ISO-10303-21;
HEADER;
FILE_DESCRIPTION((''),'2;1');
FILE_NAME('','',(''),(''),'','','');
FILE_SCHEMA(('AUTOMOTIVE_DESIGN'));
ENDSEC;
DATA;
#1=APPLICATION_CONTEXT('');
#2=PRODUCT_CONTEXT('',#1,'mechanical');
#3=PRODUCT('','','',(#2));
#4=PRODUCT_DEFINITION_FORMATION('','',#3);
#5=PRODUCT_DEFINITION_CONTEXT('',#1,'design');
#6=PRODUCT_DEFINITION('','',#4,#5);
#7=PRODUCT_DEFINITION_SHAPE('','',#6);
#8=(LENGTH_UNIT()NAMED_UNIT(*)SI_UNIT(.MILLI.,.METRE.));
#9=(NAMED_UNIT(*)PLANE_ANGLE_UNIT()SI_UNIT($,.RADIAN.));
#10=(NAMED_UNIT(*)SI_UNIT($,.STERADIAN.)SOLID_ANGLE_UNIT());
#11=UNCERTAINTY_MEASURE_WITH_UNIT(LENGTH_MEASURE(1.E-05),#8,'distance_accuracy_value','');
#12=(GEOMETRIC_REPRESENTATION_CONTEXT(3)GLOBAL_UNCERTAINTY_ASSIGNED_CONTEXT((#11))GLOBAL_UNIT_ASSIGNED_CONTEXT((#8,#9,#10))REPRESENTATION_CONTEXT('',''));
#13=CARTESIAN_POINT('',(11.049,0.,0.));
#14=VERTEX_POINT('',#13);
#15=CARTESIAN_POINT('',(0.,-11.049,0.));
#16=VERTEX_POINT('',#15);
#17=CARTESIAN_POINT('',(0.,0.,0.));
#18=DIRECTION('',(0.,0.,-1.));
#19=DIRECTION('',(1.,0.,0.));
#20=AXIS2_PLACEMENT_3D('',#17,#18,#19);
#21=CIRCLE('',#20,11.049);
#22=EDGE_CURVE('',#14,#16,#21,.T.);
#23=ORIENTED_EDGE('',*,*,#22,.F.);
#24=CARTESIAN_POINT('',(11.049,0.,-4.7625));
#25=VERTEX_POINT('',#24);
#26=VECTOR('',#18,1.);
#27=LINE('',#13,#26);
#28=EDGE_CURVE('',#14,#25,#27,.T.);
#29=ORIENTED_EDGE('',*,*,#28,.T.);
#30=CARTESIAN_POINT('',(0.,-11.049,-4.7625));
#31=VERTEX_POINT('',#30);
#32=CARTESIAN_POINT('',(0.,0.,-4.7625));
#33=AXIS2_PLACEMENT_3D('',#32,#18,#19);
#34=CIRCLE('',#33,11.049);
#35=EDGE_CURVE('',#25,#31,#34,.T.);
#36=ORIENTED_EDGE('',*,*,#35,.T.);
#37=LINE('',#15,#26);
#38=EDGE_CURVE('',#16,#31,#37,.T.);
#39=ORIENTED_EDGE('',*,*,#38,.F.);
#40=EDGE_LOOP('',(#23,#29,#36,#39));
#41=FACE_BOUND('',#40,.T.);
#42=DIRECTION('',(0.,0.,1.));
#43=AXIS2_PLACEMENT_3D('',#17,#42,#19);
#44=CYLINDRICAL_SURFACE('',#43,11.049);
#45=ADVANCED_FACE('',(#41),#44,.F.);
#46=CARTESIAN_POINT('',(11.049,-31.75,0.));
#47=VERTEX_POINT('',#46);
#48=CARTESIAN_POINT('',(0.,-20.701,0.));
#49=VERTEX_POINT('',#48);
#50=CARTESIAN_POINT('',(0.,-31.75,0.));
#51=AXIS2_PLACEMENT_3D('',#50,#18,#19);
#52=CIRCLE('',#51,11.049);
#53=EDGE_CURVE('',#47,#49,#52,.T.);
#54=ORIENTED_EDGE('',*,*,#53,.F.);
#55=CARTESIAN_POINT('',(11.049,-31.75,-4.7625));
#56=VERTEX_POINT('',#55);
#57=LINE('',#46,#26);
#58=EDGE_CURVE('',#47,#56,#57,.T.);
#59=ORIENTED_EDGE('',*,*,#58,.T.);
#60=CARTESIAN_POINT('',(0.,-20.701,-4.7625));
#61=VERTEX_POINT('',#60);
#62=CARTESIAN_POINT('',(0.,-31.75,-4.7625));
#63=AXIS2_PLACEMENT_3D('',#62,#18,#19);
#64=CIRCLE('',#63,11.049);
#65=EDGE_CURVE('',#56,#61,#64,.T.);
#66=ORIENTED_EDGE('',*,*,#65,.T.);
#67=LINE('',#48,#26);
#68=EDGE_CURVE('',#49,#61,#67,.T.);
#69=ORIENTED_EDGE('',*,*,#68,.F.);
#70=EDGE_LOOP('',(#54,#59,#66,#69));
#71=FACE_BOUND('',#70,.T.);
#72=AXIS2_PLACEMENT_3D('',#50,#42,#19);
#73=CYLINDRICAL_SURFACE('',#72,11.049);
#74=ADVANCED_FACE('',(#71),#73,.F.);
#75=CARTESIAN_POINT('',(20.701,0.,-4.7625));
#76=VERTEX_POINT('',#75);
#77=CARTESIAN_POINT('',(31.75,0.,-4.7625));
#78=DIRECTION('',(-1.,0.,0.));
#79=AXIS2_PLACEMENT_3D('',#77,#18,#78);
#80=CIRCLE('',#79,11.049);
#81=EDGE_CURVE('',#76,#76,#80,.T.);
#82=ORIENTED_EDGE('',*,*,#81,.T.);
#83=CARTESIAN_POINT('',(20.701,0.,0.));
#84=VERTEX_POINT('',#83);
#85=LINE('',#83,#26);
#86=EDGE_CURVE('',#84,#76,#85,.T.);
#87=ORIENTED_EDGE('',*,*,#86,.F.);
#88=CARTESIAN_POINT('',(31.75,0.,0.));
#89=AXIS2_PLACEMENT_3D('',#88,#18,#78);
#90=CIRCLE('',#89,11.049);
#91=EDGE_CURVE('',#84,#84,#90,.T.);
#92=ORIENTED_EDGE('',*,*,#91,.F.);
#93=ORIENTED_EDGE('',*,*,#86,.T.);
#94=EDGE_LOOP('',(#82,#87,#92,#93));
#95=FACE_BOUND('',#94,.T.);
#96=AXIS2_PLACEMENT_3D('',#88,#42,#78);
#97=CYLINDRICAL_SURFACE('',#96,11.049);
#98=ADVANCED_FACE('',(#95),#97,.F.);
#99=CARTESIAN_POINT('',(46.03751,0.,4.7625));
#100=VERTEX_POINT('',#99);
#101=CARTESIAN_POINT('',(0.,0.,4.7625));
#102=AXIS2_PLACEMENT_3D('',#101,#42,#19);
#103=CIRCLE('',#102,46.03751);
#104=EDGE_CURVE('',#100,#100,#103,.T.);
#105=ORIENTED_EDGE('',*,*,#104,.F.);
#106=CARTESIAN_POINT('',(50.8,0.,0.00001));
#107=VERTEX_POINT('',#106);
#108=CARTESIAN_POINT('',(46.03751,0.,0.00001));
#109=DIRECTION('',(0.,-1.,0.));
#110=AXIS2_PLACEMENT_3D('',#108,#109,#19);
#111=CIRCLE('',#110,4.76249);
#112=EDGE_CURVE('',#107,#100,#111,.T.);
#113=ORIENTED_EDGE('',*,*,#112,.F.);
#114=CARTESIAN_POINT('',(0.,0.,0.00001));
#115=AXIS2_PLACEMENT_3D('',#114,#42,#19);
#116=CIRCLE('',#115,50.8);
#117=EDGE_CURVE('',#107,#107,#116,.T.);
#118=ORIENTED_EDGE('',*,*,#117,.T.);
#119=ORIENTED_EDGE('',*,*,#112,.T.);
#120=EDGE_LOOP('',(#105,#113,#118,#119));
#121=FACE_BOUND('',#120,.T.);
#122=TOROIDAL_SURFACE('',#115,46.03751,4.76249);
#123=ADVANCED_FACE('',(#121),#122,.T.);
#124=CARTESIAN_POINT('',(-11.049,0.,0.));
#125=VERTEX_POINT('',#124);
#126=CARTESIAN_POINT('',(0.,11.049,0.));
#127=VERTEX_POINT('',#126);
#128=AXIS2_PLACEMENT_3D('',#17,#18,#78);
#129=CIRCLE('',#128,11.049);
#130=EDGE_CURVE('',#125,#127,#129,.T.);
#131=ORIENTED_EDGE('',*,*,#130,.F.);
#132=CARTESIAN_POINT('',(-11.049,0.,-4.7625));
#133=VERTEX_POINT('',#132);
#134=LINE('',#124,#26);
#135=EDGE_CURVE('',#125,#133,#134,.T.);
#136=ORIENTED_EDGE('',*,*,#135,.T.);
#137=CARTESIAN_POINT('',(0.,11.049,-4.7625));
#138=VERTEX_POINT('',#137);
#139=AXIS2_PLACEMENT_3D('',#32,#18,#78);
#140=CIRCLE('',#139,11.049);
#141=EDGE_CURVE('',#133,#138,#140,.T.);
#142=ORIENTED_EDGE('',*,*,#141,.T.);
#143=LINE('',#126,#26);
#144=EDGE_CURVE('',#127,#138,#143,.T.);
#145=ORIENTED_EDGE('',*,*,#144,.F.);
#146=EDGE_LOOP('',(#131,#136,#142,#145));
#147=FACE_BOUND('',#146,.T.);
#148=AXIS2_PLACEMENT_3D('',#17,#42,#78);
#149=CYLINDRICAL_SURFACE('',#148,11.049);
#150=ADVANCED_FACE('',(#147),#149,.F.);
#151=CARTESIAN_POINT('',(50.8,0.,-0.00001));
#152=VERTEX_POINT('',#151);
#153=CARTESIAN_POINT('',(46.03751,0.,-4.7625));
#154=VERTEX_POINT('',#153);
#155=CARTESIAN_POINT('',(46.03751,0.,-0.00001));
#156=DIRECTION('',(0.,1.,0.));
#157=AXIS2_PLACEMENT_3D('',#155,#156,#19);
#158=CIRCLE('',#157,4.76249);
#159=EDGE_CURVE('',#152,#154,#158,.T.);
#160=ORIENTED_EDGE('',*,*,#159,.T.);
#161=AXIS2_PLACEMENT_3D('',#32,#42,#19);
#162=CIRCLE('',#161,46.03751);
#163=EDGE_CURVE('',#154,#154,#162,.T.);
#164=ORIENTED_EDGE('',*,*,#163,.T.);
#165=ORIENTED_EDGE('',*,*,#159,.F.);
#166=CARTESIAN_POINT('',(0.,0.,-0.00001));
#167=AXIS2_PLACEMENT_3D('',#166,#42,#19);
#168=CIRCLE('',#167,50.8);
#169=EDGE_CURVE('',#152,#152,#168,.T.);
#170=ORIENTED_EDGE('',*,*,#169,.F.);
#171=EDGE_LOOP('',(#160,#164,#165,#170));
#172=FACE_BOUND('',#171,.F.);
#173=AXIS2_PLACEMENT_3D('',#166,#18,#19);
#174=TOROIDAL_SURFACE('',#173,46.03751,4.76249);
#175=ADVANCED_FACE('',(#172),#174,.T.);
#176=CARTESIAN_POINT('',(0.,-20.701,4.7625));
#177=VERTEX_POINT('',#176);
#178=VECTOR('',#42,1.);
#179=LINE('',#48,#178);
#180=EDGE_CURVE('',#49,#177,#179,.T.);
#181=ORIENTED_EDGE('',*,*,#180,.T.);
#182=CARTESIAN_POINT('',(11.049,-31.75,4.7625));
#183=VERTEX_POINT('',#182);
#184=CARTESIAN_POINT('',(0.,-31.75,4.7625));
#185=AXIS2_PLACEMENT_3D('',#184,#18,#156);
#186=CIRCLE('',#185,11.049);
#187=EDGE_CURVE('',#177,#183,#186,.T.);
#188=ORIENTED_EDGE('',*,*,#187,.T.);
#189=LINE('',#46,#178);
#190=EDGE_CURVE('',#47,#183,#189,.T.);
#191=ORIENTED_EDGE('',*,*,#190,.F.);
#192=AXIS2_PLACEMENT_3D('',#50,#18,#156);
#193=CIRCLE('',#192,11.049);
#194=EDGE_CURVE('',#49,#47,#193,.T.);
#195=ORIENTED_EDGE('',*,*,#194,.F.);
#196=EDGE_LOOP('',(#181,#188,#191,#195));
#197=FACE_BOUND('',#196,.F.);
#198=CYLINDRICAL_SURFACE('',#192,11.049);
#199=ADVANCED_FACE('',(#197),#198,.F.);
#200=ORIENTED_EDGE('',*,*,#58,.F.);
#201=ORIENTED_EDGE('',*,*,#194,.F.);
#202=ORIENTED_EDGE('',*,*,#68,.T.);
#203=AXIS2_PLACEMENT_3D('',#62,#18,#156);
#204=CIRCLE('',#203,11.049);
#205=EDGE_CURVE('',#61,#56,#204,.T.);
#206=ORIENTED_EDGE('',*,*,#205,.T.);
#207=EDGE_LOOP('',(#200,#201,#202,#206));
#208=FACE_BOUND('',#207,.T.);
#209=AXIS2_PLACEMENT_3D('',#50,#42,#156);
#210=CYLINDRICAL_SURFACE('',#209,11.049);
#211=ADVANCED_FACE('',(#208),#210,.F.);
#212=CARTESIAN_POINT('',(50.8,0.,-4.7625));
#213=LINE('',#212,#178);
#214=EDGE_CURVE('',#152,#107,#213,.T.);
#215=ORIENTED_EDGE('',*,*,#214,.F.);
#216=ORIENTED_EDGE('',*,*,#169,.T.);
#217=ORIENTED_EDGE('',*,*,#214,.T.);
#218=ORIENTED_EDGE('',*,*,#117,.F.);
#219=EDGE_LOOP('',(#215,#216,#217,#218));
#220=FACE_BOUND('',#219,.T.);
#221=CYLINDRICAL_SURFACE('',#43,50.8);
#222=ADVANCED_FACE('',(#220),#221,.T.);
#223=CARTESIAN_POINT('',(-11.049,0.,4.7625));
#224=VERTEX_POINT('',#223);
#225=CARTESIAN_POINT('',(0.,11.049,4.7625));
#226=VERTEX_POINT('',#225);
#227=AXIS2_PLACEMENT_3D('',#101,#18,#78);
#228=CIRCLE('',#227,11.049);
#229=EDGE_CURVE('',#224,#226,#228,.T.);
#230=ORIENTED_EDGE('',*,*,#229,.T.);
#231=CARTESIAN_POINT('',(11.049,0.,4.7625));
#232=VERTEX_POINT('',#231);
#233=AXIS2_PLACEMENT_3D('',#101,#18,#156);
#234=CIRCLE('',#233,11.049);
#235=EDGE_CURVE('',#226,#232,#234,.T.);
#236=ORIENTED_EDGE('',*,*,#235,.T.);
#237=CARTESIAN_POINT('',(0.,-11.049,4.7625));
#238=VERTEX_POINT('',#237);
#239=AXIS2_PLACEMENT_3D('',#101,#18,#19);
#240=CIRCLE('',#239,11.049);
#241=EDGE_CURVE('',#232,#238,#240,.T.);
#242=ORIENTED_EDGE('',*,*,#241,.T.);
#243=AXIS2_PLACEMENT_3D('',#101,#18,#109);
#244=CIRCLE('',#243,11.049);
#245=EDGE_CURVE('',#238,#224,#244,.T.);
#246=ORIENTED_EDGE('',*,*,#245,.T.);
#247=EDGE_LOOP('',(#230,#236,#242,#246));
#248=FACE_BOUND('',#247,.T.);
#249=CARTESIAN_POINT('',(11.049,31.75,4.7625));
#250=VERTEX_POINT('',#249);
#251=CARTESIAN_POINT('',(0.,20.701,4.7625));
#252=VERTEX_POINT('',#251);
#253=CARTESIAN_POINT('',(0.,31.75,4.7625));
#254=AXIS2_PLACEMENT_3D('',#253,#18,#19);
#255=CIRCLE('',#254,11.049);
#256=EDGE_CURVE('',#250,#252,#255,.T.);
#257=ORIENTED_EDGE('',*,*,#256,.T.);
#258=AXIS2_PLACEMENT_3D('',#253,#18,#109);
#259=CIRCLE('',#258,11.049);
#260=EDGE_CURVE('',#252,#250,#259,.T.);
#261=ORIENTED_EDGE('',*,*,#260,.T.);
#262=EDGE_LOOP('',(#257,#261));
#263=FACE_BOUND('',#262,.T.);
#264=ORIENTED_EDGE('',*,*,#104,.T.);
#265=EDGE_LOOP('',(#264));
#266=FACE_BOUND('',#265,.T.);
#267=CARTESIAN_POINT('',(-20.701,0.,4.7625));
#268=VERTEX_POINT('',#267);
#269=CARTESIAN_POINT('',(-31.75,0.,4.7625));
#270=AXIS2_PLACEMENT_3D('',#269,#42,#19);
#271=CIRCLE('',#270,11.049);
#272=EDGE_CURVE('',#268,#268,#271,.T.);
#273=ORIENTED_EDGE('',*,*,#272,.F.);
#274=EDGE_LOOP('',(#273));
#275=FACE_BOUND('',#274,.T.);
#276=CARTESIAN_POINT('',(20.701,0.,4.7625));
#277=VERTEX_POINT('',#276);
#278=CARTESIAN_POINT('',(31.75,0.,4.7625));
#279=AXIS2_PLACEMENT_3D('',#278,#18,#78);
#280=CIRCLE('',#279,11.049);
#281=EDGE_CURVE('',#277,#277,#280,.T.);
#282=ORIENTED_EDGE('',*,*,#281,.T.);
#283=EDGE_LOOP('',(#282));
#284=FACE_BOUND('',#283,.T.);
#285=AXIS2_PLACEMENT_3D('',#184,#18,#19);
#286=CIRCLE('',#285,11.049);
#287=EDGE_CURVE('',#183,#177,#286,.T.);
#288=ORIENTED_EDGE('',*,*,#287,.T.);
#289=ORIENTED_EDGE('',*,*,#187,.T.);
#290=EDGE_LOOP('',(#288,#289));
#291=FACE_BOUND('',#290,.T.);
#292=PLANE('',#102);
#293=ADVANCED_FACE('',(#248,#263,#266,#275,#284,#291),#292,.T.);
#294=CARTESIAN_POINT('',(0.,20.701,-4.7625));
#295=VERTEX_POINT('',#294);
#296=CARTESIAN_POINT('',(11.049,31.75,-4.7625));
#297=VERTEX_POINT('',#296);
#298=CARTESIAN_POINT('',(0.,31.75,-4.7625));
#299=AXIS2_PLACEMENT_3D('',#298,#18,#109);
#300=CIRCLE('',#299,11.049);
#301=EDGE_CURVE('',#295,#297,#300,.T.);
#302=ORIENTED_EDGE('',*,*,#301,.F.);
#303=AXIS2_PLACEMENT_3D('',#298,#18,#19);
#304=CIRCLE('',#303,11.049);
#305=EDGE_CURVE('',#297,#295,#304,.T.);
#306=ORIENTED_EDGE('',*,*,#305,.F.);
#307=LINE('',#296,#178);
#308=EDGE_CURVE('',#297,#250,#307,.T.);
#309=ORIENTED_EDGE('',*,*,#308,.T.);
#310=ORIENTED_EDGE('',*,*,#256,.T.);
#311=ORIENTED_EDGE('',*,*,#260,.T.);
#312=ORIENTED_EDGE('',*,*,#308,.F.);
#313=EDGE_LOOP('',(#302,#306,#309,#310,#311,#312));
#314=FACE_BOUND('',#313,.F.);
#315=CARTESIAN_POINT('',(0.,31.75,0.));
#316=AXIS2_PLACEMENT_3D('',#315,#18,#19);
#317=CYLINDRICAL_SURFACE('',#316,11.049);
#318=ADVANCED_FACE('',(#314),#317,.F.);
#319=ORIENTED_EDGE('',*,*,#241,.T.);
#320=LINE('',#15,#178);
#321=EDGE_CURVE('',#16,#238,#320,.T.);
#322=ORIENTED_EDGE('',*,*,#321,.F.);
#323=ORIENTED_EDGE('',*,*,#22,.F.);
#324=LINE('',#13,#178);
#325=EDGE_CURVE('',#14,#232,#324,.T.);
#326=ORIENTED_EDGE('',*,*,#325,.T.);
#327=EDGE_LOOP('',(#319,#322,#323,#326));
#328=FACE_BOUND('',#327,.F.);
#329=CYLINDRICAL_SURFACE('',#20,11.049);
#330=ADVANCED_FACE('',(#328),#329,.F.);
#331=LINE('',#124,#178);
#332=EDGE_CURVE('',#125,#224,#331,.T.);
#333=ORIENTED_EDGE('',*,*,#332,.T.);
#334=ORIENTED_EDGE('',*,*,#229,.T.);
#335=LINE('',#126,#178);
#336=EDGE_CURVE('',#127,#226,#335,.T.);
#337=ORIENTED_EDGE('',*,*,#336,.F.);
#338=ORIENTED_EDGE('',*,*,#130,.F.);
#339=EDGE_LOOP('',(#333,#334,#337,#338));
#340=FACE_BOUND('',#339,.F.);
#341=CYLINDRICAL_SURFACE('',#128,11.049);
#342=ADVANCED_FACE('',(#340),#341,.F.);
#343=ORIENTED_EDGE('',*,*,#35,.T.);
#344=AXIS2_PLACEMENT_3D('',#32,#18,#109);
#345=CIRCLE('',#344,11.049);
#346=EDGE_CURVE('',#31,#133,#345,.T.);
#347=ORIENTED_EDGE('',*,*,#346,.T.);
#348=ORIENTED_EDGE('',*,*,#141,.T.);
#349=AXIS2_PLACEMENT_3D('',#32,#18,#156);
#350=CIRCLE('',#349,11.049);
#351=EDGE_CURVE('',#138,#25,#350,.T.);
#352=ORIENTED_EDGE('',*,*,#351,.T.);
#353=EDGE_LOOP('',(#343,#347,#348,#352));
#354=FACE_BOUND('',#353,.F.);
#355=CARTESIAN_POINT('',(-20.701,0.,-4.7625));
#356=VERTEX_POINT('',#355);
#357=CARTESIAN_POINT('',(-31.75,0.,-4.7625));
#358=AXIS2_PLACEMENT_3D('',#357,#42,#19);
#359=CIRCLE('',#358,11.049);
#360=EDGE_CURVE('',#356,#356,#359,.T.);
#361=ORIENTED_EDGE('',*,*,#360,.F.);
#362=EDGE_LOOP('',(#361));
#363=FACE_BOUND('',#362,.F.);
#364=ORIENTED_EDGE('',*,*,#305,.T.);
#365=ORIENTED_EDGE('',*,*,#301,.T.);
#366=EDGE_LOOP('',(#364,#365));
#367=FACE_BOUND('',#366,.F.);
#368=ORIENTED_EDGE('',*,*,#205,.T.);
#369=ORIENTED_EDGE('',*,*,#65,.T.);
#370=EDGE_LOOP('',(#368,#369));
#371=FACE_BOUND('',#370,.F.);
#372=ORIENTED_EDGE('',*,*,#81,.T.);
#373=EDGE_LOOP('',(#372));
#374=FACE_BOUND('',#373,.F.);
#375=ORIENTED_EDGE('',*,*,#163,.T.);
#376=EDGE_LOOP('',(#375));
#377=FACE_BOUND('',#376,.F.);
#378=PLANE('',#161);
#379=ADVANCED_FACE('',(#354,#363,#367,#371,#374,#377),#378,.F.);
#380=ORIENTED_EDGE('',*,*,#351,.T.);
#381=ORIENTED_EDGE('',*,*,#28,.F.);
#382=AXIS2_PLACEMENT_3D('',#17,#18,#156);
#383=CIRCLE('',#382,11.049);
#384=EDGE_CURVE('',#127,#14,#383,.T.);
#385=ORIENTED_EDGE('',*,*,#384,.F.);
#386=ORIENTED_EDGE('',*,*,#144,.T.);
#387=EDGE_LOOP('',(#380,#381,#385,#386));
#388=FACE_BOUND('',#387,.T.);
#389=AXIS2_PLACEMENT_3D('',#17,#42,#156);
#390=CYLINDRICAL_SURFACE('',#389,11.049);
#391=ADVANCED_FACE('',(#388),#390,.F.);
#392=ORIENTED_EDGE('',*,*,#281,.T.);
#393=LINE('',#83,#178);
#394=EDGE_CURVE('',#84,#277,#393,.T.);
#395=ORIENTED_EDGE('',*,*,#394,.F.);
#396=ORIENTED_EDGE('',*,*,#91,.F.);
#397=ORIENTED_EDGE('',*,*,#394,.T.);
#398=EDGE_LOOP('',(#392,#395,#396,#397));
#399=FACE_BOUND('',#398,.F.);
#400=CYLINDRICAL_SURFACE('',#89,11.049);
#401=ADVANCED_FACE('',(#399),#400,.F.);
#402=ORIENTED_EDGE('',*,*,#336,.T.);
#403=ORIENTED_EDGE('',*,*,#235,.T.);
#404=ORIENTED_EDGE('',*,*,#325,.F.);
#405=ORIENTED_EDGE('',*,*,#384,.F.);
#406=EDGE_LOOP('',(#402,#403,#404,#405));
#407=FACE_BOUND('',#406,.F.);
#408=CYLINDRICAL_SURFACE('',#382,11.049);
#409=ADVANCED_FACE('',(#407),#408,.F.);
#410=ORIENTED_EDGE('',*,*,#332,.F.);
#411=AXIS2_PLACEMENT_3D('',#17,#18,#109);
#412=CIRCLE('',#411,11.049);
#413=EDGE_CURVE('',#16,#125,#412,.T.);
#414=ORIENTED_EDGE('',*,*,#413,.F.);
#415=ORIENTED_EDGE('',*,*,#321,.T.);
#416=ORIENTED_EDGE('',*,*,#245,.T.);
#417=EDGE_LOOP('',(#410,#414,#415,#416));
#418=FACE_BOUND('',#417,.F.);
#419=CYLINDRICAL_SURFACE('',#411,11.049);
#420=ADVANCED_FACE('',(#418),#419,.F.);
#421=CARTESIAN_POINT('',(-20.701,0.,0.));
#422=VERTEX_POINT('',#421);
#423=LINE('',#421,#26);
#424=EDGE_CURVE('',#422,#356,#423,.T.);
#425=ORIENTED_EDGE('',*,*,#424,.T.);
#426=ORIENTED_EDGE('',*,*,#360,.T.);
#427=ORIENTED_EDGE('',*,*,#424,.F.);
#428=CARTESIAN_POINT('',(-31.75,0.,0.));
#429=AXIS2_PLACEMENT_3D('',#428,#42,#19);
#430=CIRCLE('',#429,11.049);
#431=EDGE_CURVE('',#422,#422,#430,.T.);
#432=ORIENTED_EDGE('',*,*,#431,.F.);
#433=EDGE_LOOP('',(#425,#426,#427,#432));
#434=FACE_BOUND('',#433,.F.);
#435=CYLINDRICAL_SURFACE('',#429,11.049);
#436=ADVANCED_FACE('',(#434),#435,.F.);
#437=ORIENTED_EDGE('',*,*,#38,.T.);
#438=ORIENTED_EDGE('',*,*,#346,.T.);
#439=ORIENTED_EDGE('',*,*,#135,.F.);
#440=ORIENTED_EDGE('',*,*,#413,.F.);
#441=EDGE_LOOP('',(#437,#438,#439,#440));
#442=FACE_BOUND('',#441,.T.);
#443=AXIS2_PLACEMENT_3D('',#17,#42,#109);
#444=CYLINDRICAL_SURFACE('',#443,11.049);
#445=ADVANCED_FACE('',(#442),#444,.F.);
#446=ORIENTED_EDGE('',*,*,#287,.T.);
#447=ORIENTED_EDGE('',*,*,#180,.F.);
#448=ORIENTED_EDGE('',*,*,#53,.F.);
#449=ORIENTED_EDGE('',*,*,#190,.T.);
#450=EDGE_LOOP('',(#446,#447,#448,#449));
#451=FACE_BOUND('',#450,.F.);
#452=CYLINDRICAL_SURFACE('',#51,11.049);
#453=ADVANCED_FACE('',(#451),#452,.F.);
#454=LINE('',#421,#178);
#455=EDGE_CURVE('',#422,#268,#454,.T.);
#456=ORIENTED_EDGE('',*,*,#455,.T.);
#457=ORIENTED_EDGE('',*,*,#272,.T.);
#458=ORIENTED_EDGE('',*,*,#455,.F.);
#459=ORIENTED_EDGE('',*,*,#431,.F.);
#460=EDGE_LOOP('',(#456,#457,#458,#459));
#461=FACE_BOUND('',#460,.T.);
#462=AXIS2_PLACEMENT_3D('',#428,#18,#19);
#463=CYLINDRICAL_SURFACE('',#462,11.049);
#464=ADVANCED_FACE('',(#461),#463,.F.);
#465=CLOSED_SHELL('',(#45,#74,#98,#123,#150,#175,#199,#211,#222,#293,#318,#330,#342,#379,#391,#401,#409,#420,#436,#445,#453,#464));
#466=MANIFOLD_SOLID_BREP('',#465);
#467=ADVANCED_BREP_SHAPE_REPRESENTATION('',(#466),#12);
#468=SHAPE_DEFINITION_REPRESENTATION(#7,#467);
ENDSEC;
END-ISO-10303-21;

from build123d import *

# Parameters (mm, degrees)
F0_R     = 50.8
F0_R_2   = 11.049
F1_DEPTH = 4.7625
F2_R     = 4.76249


# Not quite as in the source:
# - a fillet or chamfer is up to 0.001 mm smaller than in the source, because OpenCascade refuses the exact size


with BuildPart() as f1:
    # F0 (on Top) → F1 (new body, symmetric)
    with BuildSketch(Plane.XY):
        Circle(F0_R)
        with BuildLine():
            ThreePointArc((11.049, -31.75), (-7.8128228253, -39.5628228253), (0, -20.701))
            ThreePointArc((0, -20.701), (7.8128228253, -23.9371771747), (11.049, -31.75))
        make_face(mode=Mode.SUBTRACT)
        with Locations((-31.75, 0)):
            Circle(F0_R_2, mode=Mode.SUBTRACT)
        with BuildLine():
            ThreePointArc((0, 11.049), (7.8128228253, 7.8128228253), (11.049, 0))
            ThreePointArc((11.049, 0), (7.8128228253, -7.8128228253), (0, -11.049))
            ThreePointArc((0, -11.049), (-7.8128228253, -7.8128228253), (-11.049, 0))
            ThreePointArc((-11.049, 0), (-7.8128228253, 7.8128228253), (0, 11.049))
        make_face(mode=Mode.SUBTRACT)
        with BuildLine():
            ThreePointArc((42.799, 0), (31.75, -11.049), (20.701, 0))
            ThreePointArc((20.701, 0), (31.75, 11.049), (42.799, 0))
        make_face(mode=Mode.SUBTRACT)
        with BuildLine():
            ThreePointArc((11.049, 31.75), (7.8128228253, 23.9371771747), (0, 20.701))
            ThreePointArc((0, 20.701), (-7.8128228253, 39.5628228253), (11.049, 31.75))
        make_face(mode=Mode.SUBTRACT)
    extrude(amount=F1_DEPTH, both=True)

    # F2 (radius 4.7625 in the source; OpenCascade refuses exactly that, so slightly less here)
    f2_edges = [f1.edges().sort_by_distance(p)[0] for p in [
        (-50.8, 0, -4.7625),
        (50.8, 0, 0),
        (-50.8, 0, 4.7625),
    ]]
    fillet(f2_edges, radius=F2_R)


solid = f1.part
